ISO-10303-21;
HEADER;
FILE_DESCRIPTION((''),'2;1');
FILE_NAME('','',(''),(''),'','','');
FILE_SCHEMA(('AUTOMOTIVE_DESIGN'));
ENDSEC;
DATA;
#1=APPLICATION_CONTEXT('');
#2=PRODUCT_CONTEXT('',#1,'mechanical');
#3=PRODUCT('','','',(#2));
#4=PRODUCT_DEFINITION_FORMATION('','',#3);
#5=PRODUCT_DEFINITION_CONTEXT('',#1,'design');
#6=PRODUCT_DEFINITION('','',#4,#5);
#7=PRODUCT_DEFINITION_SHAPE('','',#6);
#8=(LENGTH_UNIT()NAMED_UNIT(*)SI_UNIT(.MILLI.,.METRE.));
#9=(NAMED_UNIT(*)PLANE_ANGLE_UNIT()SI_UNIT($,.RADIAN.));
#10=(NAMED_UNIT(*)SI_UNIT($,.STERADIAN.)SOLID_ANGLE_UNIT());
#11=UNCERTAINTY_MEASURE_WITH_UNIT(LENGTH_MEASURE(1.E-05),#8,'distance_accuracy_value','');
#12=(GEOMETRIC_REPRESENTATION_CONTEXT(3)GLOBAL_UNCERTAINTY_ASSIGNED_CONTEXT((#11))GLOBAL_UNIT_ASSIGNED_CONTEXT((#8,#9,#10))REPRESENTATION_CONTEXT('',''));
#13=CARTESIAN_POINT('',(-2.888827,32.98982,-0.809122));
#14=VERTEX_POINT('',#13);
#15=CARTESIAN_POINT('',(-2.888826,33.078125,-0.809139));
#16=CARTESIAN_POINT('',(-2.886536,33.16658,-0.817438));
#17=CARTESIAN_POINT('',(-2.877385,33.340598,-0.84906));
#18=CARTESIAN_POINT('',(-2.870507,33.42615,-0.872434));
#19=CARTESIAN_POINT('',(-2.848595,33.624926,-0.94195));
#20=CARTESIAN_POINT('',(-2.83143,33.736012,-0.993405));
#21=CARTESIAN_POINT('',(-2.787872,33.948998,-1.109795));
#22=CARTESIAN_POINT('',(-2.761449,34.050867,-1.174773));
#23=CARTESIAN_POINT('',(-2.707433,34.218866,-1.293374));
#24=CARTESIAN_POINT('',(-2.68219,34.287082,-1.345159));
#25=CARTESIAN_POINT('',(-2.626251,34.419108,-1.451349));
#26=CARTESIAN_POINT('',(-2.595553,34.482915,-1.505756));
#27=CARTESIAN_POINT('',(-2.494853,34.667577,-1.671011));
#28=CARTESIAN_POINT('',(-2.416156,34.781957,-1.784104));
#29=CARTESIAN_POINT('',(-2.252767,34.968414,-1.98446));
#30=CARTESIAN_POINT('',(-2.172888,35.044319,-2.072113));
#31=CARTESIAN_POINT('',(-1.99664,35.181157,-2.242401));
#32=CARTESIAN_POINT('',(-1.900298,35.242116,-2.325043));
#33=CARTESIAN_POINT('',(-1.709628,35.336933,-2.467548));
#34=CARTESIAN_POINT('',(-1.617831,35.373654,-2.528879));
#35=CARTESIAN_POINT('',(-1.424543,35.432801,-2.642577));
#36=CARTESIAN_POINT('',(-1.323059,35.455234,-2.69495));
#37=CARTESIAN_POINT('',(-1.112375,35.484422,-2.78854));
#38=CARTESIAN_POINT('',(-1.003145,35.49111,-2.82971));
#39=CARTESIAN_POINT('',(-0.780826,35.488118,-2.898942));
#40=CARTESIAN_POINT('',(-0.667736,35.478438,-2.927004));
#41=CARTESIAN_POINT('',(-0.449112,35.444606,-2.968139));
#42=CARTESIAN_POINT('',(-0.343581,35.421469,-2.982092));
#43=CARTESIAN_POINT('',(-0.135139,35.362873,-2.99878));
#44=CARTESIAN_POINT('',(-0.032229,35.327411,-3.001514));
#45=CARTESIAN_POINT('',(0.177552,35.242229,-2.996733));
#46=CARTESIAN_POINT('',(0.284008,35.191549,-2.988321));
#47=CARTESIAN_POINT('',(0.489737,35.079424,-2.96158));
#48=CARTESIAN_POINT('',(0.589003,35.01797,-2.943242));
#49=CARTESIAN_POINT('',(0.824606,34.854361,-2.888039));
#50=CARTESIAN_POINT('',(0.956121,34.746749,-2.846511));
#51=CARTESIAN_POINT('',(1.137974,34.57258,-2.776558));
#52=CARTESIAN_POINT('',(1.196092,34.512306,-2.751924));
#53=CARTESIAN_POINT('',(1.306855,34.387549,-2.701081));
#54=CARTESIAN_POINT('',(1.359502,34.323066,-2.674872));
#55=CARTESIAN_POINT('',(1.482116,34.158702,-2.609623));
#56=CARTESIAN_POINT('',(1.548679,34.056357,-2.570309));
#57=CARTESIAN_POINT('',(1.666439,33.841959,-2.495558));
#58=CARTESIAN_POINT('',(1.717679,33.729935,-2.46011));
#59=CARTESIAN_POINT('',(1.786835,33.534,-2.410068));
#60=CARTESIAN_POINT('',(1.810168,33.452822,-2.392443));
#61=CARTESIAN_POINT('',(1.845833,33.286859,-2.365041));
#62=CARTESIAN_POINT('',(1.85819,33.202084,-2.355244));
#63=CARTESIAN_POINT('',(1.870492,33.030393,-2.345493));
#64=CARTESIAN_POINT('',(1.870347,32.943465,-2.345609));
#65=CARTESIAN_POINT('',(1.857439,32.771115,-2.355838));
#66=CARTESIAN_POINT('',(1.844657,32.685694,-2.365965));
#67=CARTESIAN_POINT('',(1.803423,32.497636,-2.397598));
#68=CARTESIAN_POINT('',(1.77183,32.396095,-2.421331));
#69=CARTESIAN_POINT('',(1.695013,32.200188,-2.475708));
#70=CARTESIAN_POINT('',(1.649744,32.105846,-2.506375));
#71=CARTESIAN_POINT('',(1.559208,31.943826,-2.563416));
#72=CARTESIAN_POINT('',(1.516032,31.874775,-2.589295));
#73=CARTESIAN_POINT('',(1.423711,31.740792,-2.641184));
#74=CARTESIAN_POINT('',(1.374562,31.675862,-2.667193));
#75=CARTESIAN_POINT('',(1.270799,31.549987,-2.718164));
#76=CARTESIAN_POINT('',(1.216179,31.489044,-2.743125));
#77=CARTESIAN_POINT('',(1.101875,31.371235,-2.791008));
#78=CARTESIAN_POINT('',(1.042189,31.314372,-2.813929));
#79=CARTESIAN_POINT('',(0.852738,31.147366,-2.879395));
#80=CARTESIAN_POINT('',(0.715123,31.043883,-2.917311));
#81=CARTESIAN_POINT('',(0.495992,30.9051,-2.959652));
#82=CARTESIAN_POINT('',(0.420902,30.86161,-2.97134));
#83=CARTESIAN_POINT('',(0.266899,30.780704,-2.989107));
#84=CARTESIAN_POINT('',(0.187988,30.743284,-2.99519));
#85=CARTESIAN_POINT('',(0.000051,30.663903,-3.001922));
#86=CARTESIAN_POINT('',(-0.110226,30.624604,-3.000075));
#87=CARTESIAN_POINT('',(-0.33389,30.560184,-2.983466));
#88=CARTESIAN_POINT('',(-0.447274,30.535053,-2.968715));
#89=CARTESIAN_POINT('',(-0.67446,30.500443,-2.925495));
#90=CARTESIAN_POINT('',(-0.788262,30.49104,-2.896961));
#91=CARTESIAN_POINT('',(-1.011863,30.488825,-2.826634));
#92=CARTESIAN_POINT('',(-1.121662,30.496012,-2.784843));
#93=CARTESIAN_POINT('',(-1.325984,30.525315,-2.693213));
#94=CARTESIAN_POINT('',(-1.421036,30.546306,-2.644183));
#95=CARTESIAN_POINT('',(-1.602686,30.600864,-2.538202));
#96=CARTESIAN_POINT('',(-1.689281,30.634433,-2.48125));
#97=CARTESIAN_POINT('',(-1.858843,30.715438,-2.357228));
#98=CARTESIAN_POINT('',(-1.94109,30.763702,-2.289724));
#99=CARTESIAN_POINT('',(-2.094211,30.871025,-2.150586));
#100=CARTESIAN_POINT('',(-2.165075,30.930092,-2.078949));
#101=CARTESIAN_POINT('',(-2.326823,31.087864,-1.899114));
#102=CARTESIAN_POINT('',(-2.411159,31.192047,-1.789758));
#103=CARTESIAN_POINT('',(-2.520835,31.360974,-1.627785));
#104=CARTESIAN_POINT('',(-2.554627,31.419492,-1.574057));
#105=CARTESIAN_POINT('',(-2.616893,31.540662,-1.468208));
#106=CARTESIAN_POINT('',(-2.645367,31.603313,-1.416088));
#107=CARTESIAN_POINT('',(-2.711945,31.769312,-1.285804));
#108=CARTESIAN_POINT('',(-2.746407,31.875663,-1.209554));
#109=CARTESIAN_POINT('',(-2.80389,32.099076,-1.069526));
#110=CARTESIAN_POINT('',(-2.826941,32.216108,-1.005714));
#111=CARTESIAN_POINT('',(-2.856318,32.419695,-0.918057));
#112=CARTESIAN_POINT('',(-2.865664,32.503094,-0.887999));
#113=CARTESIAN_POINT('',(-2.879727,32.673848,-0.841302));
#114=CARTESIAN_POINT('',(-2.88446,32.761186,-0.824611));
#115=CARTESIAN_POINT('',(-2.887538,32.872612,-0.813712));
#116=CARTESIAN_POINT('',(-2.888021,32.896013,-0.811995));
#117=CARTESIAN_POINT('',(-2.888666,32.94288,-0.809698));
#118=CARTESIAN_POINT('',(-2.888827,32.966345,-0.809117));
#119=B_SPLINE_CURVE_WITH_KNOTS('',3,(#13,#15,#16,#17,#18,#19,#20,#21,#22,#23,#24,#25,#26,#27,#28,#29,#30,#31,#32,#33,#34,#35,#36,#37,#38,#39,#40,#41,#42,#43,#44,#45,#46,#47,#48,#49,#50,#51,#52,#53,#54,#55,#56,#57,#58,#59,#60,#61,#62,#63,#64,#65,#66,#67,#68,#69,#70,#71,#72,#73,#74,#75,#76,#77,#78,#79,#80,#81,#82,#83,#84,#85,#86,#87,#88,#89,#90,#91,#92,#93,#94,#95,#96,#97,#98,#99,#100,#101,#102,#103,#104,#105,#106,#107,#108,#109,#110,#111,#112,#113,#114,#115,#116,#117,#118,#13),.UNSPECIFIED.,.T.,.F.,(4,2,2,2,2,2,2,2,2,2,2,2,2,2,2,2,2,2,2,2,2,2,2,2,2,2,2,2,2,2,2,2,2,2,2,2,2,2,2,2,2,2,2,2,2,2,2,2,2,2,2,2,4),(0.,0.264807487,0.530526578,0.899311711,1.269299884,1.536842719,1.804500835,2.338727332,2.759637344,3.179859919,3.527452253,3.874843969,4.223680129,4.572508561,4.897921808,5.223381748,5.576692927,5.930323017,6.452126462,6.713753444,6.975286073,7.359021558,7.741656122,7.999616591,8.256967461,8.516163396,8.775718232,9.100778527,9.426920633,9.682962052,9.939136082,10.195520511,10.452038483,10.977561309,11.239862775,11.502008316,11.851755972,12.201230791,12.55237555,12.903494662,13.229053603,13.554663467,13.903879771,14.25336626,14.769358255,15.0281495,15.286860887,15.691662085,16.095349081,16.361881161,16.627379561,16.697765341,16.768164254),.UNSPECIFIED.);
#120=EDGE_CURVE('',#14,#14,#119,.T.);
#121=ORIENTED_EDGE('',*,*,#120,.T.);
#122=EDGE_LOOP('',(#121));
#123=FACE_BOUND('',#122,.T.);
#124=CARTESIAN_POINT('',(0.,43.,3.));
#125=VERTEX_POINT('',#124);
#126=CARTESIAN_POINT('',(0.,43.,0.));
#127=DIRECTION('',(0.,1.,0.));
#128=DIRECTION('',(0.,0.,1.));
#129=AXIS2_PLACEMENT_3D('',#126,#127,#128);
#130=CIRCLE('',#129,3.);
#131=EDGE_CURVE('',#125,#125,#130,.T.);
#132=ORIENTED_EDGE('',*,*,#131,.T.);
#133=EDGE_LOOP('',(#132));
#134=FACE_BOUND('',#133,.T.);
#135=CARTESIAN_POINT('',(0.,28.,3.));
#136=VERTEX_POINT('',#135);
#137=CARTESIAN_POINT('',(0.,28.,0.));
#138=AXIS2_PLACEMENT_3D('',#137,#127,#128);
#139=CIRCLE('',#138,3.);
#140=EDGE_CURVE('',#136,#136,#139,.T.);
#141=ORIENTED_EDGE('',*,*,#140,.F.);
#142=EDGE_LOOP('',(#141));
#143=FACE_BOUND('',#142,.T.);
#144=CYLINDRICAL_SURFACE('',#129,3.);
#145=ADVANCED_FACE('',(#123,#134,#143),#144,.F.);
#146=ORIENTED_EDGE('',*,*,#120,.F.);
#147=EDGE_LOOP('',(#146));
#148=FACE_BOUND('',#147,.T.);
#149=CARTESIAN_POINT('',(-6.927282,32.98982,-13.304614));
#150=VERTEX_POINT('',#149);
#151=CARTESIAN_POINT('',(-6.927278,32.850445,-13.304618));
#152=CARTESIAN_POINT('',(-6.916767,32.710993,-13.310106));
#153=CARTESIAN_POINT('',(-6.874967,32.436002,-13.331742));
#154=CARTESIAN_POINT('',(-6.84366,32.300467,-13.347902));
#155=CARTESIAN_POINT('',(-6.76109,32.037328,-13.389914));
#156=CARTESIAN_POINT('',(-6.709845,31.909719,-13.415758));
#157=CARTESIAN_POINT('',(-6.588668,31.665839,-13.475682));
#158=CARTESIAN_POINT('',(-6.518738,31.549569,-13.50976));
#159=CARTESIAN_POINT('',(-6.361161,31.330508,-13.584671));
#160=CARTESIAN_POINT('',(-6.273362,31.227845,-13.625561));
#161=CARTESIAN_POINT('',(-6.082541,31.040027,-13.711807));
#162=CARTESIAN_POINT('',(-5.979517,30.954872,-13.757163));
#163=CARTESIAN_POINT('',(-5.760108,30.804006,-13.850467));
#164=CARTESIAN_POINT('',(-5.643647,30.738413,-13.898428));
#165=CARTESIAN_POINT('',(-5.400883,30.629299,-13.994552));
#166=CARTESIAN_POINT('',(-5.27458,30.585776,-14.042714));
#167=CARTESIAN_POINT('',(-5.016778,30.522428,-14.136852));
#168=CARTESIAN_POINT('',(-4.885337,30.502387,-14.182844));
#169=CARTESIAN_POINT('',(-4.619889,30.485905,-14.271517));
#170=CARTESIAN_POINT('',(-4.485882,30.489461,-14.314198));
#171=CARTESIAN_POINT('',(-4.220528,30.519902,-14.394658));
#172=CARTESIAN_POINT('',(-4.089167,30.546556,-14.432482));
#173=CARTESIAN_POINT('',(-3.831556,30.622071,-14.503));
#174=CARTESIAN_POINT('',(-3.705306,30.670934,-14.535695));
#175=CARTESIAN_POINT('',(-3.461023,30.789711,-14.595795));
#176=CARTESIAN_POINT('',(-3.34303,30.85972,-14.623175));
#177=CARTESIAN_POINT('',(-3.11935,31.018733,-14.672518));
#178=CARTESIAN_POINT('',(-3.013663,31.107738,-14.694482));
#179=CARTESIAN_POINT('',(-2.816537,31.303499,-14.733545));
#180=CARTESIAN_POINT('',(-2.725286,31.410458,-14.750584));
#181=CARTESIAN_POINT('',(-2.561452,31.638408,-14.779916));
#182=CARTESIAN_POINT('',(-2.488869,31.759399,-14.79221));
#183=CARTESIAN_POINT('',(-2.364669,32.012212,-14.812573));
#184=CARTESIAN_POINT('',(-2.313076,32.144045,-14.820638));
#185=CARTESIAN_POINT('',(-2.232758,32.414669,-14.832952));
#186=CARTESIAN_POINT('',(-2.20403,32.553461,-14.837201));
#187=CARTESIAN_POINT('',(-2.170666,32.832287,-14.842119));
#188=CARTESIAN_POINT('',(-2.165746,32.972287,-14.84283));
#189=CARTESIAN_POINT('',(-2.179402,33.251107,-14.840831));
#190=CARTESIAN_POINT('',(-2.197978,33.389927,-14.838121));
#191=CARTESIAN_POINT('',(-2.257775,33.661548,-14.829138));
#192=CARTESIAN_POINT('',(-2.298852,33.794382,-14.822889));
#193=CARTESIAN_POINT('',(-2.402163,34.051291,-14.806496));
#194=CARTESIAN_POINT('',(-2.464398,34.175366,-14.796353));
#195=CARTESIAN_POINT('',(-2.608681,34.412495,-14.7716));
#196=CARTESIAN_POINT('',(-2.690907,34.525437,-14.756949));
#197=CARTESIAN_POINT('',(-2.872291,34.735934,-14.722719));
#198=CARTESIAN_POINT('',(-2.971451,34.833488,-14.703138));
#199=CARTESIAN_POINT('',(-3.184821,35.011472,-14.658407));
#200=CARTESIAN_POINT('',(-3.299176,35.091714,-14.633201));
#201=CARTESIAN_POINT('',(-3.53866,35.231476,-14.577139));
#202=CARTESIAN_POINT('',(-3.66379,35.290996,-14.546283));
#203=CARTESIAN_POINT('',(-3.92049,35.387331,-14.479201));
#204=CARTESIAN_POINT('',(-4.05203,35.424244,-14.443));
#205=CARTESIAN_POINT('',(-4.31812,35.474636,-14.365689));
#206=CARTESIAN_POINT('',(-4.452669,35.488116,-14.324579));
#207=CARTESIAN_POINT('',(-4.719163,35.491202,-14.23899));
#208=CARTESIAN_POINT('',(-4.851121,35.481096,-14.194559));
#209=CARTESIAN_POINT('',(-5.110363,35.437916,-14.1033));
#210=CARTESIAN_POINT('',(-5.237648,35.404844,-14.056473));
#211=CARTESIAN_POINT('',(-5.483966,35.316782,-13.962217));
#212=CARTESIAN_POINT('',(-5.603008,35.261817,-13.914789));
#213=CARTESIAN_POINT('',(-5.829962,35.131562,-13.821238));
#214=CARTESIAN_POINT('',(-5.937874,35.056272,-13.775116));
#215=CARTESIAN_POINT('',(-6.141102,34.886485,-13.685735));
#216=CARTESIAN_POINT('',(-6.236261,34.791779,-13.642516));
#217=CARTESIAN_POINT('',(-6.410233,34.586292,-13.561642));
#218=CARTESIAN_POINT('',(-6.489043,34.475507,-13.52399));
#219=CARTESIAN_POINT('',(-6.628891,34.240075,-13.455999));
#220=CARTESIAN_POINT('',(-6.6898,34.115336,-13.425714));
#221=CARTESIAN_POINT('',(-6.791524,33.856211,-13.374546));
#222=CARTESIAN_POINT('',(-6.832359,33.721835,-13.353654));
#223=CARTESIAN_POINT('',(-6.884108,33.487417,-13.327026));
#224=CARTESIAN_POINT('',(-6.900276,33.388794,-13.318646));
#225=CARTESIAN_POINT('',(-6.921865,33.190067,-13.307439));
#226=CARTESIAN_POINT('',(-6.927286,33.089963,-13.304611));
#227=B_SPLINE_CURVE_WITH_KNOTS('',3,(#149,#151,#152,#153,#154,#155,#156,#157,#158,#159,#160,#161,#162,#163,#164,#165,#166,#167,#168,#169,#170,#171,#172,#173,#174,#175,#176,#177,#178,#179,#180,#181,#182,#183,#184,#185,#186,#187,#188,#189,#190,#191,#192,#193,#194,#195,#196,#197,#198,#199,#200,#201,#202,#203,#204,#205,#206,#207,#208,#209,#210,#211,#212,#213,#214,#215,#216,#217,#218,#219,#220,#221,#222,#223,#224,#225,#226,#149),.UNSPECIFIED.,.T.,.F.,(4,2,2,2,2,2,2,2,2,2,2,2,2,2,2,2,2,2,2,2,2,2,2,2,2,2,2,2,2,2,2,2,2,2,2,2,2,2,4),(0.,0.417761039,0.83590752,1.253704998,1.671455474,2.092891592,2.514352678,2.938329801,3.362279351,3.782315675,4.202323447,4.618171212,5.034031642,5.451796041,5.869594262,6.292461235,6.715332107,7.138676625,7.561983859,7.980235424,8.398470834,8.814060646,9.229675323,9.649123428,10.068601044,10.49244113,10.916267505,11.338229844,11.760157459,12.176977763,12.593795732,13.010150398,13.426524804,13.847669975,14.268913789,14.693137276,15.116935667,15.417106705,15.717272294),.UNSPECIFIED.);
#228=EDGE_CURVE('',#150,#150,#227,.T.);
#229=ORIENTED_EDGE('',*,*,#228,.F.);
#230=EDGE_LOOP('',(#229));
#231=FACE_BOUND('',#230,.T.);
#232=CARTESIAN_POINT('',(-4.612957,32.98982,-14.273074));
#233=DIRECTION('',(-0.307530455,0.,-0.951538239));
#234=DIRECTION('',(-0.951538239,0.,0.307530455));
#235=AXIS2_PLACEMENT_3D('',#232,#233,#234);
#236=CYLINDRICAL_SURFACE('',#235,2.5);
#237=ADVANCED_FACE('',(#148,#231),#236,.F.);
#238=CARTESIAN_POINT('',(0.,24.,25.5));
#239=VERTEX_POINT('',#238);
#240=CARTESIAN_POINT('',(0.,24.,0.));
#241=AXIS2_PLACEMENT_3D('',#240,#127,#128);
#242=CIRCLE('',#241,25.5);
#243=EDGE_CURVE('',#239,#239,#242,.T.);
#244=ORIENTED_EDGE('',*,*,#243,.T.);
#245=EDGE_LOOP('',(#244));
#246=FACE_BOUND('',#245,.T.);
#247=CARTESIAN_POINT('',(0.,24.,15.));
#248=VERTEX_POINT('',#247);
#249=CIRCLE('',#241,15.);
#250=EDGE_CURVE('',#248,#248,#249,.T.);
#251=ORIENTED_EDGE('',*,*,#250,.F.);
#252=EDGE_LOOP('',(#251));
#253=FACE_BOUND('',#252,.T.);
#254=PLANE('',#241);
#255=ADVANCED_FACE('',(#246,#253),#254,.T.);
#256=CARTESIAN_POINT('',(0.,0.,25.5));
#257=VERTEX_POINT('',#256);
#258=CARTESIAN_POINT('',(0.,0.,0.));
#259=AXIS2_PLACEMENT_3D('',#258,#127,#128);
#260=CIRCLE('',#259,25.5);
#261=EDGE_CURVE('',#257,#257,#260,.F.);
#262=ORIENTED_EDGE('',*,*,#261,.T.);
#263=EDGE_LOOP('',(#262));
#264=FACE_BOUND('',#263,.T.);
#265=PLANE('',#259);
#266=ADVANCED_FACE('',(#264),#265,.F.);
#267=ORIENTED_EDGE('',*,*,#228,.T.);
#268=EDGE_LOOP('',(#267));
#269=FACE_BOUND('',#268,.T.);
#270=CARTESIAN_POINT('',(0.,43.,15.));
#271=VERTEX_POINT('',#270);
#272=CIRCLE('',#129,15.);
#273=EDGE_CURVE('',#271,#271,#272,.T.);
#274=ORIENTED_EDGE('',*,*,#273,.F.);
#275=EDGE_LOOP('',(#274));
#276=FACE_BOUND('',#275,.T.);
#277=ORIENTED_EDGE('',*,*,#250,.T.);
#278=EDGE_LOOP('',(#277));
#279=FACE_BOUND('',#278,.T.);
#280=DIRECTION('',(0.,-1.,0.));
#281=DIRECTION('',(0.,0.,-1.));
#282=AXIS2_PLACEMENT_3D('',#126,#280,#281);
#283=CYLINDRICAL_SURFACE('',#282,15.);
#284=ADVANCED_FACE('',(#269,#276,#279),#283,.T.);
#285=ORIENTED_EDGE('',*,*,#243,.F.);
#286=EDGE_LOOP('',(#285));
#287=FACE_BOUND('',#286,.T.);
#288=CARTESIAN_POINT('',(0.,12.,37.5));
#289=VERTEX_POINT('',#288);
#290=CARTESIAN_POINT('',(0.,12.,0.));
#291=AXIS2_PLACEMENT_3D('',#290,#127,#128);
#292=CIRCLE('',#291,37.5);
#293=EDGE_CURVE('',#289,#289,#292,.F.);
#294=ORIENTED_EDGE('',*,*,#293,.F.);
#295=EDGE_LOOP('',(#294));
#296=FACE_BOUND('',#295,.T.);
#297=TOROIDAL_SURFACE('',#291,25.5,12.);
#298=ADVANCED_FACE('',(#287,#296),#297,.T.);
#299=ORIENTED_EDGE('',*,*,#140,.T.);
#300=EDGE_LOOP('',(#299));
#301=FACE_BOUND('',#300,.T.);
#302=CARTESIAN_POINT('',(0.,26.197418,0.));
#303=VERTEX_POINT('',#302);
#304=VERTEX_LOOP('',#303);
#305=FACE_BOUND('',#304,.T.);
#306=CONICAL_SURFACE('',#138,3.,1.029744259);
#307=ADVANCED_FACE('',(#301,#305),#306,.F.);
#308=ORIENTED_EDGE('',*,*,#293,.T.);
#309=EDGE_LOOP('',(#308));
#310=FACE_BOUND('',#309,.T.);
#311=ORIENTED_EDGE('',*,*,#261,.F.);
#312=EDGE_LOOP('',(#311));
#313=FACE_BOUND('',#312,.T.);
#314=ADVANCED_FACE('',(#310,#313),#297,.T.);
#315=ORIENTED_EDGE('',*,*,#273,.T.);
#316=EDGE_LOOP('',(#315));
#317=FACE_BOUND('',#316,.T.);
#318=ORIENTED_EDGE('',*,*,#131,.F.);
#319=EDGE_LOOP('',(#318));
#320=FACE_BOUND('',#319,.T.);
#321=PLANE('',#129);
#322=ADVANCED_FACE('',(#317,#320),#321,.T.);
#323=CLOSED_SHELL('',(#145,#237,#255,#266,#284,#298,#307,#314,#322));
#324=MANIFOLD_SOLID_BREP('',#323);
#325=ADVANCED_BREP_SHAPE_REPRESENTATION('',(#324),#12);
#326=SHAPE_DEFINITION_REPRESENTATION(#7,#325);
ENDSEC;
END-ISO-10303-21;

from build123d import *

# Parameters (mm, degrees)
SKETCH_1_R                = 37.5
EXTRUDE_1_DEPTH           = 24
SKETCH_3_R                = 15
EXTRUDE_2_DEPTH           = 19
HOLE_WIZARD_6_0_6_1_D     = 6
HOLE_WIZARD_6_0_6_1_DEPTH = 15
HOLE_WIZARD_6_0_6_1_TIP   = 1.802581857
FILLET_1_R                = 12
HOLE_WIZARD_M6_2_D        = 5
HOLE_WIZARD_M6_2_DEPTH    = 15
HOLE_WIZARD_M6_2_TIP      = 1.502151548


with BuildPart() as part:
    # 草图1 → 凸台-拉伸1 (new body)
    with BuildSketch(Plane(origin=(0, 0, 0), x_dir=(1, 0, 0), z_dir=(0, 1, 0))):
        with Locations(Location((0, 0, 0), (0, 0, 270))):
            Circle(SKETCH_1_R)
    extrude(amount=EXTRUDE_1_DEPTH)

    # 草图3 → 凸台-拉伸2 (add)
    with BuildSketch(Plane(origin=(0, 24, 0), x_dir=(1, 0, 0), z_dir=(0, 1, 0))):
        with Locations(Location((0, 0, 0), (0, 0, 270))):
            Circle(SKETCH_3_R)
    extrude(amount=EXTRUDE_2_DEPTH)

    # Ø6.0 (6) 直径孔1
    with Locations(Plane(origin=(0, 43, 0), x_dir=(1, 0, 0), z_dir=(0, 1, 0))):
        with Locations((0, 0)):
            Hole(HOLE_WIZARD_6_0_6_1_D / 2, depth=HOLE_WIZARD_6_0_6_1_DEPTH)
            with Locations((0, 0, -(HOLE_WIZARD_6_0_6_1_DEPTH + HOLE_WIZARD_6_0_6_1_TIP / 2))):  # 118° drill point
                Cone(0, HOLE_WIZARD_6_0_6_1_D / 2, HOLE_WIZARD_6_0_6_1_TIP, mode=Mode.SUBTRACT)

    # 圆角1
    fillet_1_edges = [part.edges().sort_by_distance(p)[0] for p in [
        (0, 0, -37.5),
        (0, 24, -37.5),
    ]]
    fillet(fillet_1_edges, radius=FILLET_1_R - 0.0001)  # a hair under: the kernel refuses the full size

    # M6 螺纹孔的螺纹孔钻头2
    with Locations(Plane(origin=(-4.612956818, 32.989820413, -14.273073579), x_dir=(-0.951538238599, 0, 0.307530454563), z_dir=(-0.307530454563, 0, -0.951538238599))):
        with Locations((0, 0)):
            Hole(HOLE_WIZARD_M6_2_D / 2, depth=HOLE_WIZARD_M6_2_DEPTH)
            with Locations((0, 0, -(HOLE_WIZARD_M6_2_DEPTH + HOLE_WIZARD_M6_2_TIP / 2))):  # 118° drill point
                Cone(0, HOLE_WIZARD_M6_2_D / 2, HOLE_WIZARD_M6_2_TIP, mode=Mode.SUBTRACT)


solid = part.part
